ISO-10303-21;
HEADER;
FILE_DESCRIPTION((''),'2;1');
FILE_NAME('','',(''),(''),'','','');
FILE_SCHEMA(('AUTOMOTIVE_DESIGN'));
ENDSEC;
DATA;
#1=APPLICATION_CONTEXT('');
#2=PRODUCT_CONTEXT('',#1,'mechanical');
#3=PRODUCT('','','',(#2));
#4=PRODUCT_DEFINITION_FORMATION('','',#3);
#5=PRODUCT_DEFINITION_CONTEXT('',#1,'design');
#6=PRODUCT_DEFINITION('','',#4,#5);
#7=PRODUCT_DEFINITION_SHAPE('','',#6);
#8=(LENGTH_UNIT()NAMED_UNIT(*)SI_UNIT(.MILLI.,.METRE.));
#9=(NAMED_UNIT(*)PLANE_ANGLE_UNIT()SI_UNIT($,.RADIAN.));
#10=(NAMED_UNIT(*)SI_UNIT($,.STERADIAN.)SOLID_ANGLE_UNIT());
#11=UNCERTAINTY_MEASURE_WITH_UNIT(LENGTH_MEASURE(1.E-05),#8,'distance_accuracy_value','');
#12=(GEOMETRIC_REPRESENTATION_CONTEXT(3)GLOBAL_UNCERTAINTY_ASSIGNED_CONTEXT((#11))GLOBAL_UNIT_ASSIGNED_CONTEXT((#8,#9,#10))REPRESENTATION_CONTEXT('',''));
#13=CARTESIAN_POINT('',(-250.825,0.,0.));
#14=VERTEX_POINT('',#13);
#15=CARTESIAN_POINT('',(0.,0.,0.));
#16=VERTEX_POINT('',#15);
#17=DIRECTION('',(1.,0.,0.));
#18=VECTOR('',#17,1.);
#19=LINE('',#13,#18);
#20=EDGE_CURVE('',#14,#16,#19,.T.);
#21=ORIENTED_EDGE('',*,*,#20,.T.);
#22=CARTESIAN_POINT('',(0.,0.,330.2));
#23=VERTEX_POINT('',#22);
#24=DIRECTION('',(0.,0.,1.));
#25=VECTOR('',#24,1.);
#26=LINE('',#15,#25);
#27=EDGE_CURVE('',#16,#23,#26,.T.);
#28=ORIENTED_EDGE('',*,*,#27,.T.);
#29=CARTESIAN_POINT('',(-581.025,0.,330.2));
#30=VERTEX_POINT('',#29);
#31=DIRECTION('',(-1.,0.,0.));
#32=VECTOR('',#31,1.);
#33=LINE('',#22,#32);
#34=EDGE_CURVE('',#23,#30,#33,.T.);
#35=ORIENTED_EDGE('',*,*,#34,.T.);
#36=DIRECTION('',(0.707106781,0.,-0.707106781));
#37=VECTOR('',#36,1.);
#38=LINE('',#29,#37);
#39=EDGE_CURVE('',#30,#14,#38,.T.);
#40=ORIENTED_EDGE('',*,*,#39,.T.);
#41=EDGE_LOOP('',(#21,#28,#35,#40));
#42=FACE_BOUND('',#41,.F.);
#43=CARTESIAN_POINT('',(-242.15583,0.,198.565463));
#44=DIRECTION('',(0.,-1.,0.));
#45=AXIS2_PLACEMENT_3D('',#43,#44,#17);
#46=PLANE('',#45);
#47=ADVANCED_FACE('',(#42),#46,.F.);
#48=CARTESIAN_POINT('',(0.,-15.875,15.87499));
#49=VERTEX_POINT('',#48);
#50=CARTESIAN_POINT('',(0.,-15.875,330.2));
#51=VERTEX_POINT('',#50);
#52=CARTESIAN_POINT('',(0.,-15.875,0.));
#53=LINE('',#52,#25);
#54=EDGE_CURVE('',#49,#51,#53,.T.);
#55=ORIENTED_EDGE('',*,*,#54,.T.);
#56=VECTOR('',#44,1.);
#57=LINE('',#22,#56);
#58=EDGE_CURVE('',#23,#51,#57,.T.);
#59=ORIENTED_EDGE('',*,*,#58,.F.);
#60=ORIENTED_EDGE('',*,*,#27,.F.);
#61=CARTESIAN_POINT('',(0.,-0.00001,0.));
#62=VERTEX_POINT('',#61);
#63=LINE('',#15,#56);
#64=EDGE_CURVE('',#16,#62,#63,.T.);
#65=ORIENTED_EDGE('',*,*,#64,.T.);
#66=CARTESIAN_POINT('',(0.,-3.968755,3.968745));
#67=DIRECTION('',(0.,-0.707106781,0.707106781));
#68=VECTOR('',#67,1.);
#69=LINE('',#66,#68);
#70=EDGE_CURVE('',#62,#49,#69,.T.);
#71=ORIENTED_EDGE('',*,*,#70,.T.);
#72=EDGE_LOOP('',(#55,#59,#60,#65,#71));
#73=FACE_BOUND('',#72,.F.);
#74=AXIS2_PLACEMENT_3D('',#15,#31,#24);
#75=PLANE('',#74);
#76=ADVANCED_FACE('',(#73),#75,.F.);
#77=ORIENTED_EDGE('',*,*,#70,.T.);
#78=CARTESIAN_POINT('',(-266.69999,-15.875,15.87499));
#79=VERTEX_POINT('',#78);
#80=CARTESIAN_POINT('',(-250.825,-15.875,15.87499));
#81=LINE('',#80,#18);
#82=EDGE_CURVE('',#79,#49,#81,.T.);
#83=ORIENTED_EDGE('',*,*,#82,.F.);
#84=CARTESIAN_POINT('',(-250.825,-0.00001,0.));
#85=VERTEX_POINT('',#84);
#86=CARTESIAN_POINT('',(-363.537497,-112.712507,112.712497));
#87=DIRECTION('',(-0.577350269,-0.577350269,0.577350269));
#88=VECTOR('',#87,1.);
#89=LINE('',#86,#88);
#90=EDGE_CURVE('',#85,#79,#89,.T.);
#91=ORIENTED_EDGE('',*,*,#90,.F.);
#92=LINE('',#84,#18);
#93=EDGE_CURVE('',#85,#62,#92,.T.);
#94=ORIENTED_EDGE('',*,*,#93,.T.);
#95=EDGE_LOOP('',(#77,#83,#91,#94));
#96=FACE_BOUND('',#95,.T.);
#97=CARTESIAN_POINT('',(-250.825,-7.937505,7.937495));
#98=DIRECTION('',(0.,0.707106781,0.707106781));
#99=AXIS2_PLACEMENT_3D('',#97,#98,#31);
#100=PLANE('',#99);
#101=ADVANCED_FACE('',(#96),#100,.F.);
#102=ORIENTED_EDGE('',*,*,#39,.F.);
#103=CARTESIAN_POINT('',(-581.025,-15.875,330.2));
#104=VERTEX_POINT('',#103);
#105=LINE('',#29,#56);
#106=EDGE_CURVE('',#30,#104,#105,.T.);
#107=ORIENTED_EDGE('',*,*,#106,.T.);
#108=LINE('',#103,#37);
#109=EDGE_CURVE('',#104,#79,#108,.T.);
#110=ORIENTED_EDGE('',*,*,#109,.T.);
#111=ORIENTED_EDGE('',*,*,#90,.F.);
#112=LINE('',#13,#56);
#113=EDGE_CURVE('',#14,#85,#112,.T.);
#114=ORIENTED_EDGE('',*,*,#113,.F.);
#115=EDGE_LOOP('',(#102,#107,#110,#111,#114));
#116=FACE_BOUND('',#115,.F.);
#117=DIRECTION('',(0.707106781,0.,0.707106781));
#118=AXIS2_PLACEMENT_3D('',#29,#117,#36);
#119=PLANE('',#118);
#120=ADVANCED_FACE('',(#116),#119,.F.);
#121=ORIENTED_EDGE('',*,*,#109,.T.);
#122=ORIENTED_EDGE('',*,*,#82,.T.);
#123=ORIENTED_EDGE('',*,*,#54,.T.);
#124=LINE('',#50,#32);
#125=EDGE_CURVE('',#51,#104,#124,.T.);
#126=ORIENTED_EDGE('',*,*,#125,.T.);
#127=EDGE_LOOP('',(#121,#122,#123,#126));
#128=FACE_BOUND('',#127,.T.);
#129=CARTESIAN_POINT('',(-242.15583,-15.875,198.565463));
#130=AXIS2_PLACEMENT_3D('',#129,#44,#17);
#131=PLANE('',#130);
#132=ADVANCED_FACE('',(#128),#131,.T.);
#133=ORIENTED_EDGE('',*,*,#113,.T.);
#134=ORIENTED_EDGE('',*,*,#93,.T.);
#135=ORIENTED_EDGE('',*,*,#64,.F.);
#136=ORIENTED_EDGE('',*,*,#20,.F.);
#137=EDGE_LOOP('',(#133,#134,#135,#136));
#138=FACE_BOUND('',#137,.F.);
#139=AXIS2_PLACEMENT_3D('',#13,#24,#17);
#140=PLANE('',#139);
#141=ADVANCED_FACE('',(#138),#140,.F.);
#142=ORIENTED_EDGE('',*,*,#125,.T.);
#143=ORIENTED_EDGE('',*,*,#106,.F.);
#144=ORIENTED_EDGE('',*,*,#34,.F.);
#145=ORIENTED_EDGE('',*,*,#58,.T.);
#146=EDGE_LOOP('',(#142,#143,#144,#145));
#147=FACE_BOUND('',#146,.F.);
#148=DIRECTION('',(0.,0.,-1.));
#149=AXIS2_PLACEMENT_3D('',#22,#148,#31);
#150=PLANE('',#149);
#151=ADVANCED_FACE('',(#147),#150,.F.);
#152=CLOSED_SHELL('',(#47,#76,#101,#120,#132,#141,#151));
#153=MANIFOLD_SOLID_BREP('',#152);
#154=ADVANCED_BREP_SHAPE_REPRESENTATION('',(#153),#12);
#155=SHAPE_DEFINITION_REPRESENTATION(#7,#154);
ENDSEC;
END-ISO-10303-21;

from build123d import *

# Parameters (mm, degrees)
F1_DEPTH = 15.875
F2_SIZE  = 15.87499


# Not quite as in the source:
# - a fillet or chamfer is up to 0.001 mm smaller than in the source, because OpenCascade refuses the exact size


with BuildPart() as f1:
    # F0 (on Front) → F1 (new body)
    with BuildSketch(Plane.XZ):
        Polygon((-250.825, 0), (0, 0), (0, 330.2), (-581.025, 330.2), align=None)
    extrude(amount=F1_DEPTH)

    # F2 (size 15.875 in the source; OpenCascade refuses exactly that, so slightly less here)
    f2_edges = [f1.edges().sort_by_distance(p)[0] for p in [
        (-125.4125, -15.875, 0),
    ]]
    chamfer(f2_edges, length=F2_SIZE)


solid = f1.part
